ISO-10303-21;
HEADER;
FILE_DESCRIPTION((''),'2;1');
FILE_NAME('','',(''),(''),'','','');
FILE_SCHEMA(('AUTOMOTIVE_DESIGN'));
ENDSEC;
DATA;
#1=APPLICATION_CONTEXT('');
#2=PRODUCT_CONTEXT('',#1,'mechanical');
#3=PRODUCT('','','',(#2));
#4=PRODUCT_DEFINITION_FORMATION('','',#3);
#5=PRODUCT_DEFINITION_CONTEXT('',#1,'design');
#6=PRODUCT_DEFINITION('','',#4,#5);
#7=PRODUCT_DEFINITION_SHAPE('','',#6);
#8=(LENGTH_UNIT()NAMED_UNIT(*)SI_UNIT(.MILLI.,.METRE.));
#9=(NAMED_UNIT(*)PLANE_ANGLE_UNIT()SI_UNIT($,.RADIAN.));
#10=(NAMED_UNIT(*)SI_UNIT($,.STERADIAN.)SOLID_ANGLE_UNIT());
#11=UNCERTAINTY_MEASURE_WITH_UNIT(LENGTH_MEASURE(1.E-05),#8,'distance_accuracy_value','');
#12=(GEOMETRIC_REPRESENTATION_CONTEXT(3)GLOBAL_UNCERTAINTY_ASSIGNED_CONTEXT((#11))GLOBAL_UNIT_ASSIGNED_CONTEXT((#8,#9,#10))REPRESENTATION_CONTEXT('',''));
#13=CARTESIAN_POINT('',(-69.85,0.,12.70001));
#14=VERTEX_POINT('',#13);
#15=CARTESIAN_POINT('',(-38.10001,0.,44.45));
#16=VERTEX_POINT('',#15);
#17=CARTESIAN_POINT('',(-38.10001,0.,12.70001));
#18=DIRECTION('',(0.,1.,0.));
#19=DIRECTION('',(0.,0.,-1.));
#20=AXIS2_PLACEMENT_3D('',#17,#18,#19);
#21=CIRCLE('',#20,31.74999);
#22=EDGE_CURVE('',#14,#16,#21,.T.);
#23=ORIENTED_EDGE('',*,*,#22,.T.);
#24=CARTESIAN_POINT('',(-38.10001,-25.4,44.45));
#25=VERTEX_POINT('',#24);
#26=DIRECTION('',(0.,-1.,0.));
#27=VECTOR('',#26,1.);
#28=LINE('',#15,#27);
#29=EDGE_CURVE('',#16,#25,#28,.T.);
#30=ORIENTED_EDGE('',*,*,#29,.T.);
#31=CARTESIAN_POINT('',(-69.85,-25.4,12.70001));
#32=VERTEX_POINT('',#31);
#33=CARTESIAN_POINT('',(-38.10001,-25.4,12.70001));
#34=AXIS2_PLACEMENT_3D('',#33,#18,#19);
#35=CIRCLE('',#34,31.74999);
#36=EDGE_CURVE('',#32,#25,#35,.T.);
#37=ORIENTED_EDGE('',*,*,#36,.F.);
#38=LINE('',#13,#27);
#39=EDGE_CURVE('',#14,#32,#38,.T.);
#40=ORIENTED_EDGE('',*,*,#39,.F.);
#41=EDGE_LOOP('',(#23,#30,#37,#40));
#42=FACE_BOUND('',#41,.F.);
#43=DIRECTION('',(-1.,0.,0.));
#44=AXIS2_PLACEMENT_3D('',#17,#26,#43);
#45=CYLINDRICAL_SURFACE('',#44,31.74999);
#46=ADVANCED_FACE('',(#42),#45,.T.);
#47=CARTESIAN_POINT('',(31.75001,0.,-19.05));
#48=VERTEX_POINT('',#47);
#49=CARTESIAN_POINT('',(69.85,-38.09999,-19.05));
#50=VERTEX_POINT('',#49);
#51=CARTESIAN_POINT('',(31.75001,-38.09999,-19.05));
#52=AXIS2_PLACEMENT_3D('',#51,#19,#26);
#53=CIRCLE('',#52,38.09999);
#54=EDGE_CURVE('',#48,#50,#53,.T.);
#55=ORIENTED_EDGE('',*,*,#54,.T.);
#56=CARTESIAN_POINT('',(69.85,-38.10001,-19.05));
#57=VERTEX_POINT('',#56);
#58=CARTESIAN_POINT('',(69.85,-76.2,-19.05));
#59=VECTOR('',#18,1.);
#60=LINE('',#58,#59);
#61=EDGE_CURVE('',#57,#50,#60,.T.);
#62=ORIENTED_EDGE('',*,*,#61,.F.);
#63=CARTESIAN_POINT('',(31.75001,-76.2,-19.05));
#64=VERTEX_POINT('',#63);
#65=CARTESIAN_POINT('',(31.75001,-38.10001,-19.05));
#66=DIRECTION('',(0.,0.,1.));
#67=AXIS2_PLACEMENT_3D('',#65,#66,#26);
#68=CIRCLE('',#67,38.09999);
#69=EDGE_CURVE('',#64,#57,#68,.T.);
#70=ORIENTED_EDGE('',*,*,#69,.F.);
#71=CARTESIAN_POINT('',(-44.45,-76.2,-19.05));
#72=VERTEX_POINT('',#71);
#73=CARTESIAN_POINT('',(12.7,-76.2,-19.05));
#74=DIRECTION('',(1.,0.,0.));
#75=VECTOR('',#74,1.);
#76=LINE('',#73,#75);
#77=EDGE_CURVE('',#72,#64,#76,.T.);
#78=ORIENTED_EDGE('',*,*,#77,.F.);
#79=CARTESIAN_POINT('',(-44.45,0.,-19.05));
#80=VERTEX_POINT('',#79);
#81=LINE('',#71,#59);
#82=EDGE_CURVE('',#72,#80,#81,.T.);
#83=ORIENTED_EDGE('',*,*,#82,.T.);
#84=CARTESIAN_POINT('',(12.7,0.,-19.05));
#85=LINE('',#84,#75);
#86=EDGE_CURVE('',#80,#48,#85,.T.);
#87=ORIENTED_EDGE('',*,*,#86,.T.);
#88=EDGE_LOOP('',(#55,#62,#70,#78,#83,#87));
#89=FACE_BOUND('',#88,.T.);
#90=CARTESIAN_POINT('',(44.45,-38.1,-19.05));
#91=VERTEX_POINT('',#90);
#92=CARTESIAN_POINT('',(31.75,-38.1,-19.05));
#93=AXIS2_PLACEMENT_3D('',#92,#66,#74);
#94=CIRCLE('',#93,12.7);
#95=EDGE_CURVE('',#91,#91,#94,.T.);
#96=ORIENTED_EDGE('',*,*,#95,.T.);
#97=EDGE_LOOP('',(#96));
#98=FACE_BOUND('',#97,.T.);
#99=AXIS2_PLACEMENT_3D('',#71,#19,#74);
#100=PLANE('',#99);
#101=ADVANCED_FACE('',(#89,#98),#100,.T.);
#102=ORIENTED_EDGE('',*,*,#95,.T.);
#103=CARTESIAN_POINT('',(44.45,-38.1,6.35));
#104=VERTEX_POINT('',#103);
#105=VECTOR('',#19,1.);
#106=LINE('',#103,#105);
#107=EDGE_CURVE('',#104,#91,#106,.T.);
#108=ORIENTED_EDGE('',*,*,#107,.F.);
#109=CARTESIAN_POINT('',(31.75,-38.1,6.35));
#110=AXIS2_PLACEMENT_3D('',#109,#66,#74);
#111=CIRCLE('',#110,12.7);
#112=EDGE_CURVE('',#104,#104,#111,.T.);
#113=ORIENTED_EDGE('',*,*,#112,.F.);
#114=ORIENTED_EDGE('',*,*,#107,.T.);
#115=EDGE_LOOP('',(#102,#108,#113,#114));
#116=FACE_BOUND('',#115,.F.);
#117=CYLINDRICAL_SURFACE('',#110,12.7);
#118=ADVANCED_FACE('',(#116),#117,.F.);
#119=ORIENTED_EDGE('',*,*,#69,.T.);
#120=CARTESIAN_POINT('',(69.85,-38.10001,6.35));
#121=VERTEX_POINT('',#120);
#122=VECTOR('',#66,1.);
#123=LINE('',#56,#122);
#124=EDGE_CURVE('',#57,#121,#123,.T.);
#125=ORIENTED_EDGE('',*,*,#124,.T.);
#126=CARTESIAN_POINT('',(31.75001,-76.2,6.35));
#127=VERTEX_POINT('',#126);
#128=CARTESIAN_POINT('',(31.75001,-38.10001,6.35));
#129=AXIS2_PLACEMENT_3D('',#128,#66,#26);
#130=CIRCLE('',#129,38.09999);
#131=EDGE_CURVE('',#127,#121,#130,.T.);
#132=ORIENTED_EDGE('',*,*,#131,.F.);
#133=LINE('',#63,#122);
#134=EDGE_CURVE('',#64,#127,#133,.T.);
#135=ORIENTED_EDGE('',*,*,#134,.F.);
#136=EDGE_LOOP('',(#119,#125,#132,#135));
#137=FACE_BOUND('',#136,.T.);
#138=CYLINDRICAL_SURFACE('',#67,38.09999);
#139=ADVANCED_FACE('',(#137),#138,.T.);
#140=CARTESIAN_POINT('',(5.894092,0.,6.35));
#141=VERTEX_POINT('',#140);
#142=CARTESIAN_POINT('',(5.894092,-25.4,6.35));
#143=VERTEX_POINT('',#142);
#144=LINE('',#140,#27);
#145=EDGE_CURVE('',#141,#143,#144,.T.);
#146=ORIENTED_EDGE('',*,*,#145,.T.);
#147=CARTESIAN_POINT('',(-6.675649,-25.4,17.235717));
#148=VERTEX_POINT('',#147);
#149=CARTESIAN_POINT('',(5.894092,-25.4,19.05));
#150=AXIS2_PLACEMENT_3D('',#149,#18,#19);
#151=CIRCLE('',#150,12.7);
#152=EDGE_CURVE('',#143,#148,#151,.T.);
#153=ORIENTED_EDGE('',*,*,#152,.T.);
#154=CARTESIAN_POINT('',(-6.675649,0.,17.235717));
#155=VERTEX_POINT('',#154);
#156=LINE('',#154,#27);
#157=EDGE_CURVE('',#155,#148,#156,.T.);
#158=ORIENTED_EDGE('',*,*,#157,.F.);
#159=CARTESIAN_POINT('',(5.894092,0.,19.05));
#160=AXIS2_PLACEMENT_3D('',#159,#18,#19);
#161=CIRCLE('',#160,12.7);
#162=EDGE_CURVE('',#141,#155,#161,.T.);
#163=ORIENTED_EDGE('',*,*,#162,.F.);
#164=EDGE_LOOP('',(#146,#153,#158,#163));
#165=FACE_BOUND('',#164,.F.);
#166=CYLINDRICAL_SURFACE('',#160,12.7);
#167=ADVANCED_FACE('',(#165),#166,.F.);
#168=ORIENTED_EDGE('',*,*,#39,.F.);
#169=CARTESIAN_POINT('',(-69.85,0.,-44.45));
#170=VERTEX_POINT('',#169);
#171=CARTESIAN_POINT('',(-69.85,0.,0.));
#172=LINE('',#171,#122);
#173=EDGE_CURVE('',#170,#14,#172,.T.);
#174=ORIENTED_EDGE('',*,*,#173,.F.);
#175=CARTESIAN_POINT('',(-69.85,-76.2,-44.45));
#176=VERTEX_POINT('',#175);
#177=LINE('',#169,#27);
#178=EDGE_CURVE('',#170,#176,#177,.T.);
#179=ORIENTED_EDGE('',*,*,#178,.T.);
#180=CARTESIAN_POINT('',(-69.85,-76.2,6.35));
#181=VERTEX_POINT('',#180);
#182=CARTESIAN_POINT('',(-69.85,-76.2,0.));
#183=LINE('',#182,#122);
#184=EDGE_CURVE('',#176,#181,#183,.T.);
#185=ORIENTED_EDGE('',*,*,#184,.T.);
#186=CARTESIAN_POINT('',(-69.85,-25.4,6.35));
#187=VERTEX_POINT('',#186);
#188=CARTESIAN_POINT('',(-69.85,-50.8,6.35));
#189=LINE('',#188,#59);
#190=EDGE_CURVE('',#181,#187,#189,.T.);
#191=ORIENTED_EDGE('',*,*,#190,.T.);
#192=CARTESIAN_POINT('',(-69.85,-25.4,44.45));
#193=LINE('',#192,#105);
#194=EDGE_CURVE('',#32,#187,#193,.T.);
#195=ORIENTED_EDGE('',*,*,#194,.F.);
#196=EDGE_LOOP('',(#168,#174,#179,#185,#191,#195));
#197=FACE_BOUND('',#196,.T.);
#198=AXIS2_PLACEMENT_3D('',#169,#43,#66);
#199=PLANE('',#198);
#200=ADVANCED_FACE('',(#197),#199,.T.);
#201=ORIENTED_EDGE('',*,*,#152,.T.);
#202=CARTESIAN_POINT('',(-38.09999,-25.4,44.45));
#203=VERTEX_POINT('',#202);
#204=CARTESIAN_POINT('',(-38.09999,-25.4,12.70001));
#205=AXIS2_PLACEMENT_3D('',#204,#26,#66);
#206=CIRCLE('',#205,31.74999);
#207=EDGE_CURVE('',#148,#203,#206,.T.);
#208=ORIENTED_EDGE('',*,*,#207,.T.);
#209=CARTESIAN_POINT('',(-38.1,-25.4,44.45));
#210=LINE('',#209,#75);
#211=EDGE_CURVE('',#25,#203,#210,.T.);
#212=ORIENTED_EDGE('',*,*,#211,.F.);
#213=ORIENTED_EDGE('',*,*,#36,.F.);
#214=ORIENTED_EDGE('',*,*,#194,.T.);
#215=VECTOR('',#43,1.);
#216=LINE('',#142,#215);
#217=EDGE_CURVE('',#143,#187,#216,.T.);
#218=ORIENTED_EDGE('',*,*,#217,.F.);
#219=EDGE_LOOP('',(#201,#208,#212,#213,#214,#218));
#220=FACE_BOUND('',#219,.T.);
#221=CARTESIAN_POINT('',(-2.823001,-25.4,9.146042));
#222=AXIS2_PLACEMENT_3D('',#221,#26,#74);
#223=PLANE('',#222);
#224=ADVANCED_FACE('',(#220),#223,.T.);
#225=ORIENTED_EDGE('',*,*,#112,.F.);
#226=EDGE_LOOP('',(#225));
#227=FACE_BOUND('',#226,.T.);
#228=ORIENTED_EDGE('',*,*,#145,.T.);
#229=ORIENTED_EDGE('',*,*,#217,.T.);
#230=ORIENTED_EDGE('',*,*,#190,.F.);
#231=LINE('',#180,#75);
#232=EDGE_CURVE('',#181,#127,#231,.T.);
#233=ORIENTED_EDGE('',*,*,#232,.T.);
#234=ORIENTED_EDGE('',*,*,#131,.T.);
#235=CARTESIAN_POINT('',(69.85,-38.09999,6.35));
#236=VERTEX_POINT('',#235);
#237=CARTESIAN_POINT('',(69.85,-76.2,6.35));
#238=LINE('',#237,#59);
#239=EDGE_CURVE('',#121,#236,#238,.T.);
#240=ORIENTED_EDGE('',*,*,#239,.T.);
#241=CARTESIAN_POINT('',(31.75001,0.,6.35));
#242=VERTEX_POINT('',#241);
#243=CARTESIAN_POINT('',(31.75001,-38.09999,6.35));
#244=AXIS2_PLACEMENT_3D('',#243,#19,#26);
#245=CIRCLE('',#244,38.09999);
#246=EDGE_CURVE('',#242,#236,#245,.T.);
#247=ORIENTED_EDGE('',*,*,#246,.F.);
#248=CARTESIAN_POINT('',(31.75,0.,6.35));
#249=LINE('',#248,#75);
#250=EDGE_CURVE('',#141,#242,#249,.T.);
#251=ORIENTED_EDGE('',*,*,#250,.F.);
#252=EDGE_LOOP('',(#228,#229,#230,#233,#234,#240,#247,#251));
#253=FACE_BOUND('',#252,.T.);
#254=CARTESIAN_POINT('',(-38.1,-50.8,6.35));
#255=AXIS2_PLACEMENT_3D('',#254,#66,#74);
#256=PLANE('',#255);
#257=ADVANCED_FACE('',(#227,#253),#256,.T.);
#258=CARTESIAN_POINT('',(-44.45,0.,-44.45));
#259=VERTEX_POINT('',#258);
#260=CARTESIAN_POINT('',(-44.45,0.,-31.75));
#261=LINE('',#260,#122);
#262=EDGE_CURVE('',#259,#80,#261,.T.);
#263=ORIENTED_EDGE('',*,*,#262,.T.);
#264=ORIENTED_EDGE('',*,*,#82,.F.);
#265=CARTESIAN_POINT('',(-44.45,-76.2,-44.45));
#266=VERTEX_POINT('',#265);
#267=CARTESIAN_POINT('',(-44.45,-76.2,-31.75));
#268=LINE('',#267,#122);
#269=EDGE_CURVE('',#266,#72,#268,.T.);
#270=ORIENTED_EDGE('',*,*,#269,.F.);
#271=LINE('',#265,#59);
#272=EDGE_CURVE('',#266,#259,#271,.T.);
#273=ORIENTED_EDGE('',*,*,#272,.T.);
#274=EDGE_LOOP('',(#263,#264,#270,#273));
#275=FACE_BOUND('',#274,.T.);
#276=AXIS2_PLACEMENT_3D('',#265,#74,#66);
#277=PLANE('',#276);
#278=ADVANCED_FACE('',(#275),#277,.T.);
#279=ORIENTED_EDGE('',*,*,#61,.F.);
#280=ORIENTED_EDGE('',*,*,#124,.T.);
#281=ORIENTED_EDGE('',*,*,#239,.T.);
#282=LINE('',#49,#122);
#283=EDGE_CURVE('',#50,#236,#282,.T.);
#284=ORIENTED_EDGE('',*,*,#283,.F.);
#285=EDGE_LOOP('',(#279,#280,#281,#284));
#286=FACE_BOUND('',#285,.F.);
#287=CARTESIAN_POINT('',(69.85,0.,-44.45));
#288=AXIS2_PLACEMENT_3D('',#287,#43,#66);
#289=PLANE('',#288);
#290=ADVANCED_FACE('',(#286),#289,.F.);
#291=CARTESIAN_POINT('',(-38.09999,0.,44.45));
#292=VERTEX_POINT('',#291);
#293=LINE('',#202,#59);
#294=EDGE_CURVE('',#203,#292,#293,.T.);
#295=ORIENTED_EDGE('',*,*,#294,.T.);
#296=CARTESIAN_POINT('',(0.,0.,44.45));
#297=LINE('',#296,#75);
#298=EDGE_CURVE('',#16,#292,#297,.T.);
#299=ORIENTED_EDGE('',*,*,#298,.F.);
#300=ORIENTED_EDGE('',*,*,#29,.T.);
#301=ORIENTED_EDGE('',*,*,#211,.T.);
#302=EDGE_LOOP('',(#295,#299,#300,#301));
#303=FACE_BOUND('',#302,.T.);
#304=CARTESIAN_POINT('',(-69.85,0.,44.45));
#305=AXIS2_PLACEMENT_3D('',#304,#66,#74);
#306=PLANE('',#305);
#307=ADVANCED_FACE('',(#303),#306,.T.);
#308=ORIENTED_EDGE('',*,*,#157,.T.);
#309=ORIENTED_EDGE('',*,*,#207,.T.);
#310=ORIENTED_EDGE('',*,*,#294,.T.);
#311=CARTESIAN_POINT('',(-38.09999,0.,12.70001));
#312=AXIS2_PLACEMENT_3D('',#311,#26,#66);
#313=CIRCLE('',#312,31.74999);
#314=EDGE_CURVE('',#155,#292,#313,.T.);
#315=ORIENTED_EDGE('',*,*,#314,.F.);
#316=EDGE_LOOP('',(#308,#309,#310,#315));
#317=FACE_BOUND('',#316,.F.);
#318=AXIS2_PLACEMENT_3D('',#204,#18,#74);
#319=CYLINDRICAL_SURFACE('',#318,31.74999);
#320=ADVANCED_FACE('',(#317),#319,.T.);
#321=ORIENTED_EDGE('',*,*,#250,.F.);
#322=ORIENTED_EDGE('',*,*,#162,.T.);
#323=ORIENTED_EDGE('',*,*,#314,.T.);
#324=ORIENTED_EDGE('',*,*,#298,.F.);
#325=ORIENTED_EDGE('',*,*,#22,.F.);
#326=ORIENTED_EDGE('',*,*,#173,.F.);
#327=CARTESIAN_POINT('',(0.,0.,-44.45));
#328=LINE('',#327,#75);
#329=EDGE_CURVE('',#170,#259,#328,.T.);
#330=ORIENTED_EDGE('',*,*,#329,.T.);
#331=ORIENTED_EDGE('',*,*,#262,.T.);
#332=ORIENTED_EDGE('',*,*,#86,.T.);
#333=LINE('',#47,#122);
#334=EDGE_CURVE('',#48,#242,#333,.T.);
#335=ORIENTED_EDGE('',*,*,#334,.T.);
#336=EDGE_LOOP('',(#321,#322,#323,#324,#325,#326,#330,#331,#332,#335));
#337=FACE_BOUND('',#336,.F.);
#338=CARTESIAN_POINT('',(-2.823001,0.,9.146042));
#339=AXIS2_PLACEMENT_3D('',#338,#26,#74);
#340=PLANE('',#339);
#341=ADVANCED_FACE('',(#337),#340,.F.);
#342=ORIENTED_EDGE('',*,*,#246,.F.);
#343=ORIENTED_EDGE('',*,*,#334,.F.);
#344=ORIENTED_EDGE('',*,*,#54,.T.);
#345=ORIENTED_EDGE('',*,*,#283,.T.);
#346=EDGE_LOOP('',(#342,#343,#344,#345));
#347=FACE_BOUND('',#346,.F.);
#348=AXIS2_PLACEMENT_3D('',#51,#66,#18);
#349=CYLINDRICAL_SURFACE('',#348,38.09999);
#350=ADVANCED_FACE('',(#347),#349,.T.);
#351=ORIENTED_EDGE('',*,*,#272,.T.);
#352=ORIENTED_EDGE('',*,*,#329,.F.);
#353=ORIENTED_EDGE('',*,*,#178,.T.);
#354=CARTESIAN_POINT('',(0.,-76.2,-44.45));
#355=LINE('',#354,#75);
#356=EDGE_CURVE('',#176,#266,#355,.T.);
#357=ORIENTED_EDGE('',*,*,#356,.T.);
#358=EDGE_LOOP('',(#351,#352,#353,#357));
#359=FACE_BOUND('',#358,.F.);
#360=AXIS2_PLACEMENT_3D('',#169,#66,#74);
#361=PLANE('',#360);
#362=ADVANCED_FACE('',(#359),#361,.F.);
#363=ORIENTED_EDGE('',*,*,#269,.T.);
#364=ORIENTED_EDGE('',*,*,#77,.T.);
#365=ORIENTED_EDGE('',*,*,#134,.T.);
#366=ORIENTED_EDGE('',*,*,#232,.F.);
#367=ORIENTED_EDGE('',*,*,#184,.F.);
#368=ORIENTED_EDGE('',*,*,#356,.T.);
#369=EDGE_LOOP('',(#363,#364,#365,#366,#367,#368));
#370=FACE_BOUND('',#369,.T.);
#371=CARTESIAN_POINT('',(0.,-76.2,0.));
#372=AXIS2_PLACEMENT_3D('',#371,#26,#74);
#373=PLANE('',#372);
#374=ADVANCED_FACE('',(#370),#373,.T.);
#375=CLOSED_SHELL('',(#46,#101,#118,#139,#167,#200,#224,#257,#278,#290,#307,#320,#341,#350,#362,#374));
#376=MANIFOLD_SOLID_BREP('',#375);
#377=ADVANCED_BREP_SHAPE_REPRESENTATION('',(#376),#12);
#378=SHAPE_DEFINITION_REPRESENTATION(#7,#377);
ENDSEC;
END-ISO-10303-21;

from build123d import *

# Parameters (mm, degrees)
F0_W         = 139.7
F0_H         = 88.9
F1_DEPTH     = 76.2
F2_W         = 76.2
F2_H         = 38.1
F3_DEPTH     = 76.2
F4_W         = 114.3
F4_H         = 25.4
F5_DEPTH     = 76.2
F6_W         = 63.5
F6_H         = 50.8
F7_DEPTH     = 38.1
F8_R         = 31.74999
F9_R         = 38.09999
F10_T1_DEPTH = 25.4
F11_R        = 12.7
F12_DEPTH    = 25.4


# Not quite as in the source:
# - a fillet or chamfer that OpenCascade refuses, or shapes differently, is made with other operations: its cross-section is extruded or revolved along the edge and cut away or added
# - a fillet or chamfer is up to 0.001 mm smaller than in the source, because OpenCascade refuses the exact size


with BuildPart() as f1:
    # F0 (on Front) → F1 (new body)
    with BuildSketch(Plane.XZ):
        Rectangle(F0_W, F0_H)
    extrude(amount=F1_DEPTH)

    # F2 (on face) → F3 (cut)
    with BuildSketch(Plane.XZ.offset(76.2)):
        with Locations((31.75, 25.4)):
            Rectangle(F2_W, F2_H)
    extrude(amount=-F3_DEPTH, mode=Mode.SUBTRACT)

    # F4 (on face) → F5 (cut)
    with BuildSketch(Plane.XZ.offset(76.2)):
        with Locations((12.7, -31.75)):
            Rectangle(F4_W, F4_H)
    extrude(amount=-F5_DEPTH, mode=Mode.SUBTRACT)

    # F6 (on face) → F7 (cut)
    with BuildSketch(Plane.XY.offset(44.45)):
        with Locations((-38.1, -50.8)):
            Rectangle(F6_W, F6_H)
    extrude(amount=-F7_DEPTH, mode=Mode.SUBTRACT)

    # F8 (radius 31.75 in the source; OpenCascade refuses exactly that, so slightly less here)
    f8_edges = [f1.edges().sort_by_distance(p)[0] for p in [
        (-69.85, -12.7, 44.45),
        (-6.35, -12.7, 44.45),
    ]]
    fillet(f8_edges, radius=F8_R)

    # F9 (radius 38.1 in the source; OpenCascade refuses exactly that, so slightly less here)
    f9_edges = [f1.edges().sort_by_distance(p)[0] for p in [
        (69.85, -76.2, -6.35),
        (69.85, 0, -6.35),
    ]]
    fillet(f9_edges, radius=F9_R)

    # F10: fillet of radius 12.7 on 1 edges, made by hand

    # F10_s2 → F10_t1 (join)
    with BuildSketch(Plane.XZ):
        with BuildLine():
            ThreePointArc((5.894091852, 6.35), (-2.4200107012, 9.4497031955), (-6.6756486478, 17.2357167347))
            Line((-6.6756486478, 17.2357167347), (-7.9326226978, 17.0542884082))
            ThreePointArc((-7.9326226978, 17.0542884082), (-7.62, 12.70001), (-7.62, 6.35))
            Line((-7.62, 6.35), (-6.35, 5.08))
            Line((-6.35, 5.08), (5.894091852, 5.08))
            Line((5.894091852, 5.08), (5.894091852, 6.35))
        make_face()
    extrude(amount=F10_T1_DEPTH)

    # F11 (on face) → F12 (cut)
    with BuildSketch(Plane.XY.offset(6.35)):
        with Locations((31.75, -38.1)):
            Circle(F11_R)
    extrude(amount=-F12_DEPTH, mode=Mode.SUBTRACT)


solid = f1.part
